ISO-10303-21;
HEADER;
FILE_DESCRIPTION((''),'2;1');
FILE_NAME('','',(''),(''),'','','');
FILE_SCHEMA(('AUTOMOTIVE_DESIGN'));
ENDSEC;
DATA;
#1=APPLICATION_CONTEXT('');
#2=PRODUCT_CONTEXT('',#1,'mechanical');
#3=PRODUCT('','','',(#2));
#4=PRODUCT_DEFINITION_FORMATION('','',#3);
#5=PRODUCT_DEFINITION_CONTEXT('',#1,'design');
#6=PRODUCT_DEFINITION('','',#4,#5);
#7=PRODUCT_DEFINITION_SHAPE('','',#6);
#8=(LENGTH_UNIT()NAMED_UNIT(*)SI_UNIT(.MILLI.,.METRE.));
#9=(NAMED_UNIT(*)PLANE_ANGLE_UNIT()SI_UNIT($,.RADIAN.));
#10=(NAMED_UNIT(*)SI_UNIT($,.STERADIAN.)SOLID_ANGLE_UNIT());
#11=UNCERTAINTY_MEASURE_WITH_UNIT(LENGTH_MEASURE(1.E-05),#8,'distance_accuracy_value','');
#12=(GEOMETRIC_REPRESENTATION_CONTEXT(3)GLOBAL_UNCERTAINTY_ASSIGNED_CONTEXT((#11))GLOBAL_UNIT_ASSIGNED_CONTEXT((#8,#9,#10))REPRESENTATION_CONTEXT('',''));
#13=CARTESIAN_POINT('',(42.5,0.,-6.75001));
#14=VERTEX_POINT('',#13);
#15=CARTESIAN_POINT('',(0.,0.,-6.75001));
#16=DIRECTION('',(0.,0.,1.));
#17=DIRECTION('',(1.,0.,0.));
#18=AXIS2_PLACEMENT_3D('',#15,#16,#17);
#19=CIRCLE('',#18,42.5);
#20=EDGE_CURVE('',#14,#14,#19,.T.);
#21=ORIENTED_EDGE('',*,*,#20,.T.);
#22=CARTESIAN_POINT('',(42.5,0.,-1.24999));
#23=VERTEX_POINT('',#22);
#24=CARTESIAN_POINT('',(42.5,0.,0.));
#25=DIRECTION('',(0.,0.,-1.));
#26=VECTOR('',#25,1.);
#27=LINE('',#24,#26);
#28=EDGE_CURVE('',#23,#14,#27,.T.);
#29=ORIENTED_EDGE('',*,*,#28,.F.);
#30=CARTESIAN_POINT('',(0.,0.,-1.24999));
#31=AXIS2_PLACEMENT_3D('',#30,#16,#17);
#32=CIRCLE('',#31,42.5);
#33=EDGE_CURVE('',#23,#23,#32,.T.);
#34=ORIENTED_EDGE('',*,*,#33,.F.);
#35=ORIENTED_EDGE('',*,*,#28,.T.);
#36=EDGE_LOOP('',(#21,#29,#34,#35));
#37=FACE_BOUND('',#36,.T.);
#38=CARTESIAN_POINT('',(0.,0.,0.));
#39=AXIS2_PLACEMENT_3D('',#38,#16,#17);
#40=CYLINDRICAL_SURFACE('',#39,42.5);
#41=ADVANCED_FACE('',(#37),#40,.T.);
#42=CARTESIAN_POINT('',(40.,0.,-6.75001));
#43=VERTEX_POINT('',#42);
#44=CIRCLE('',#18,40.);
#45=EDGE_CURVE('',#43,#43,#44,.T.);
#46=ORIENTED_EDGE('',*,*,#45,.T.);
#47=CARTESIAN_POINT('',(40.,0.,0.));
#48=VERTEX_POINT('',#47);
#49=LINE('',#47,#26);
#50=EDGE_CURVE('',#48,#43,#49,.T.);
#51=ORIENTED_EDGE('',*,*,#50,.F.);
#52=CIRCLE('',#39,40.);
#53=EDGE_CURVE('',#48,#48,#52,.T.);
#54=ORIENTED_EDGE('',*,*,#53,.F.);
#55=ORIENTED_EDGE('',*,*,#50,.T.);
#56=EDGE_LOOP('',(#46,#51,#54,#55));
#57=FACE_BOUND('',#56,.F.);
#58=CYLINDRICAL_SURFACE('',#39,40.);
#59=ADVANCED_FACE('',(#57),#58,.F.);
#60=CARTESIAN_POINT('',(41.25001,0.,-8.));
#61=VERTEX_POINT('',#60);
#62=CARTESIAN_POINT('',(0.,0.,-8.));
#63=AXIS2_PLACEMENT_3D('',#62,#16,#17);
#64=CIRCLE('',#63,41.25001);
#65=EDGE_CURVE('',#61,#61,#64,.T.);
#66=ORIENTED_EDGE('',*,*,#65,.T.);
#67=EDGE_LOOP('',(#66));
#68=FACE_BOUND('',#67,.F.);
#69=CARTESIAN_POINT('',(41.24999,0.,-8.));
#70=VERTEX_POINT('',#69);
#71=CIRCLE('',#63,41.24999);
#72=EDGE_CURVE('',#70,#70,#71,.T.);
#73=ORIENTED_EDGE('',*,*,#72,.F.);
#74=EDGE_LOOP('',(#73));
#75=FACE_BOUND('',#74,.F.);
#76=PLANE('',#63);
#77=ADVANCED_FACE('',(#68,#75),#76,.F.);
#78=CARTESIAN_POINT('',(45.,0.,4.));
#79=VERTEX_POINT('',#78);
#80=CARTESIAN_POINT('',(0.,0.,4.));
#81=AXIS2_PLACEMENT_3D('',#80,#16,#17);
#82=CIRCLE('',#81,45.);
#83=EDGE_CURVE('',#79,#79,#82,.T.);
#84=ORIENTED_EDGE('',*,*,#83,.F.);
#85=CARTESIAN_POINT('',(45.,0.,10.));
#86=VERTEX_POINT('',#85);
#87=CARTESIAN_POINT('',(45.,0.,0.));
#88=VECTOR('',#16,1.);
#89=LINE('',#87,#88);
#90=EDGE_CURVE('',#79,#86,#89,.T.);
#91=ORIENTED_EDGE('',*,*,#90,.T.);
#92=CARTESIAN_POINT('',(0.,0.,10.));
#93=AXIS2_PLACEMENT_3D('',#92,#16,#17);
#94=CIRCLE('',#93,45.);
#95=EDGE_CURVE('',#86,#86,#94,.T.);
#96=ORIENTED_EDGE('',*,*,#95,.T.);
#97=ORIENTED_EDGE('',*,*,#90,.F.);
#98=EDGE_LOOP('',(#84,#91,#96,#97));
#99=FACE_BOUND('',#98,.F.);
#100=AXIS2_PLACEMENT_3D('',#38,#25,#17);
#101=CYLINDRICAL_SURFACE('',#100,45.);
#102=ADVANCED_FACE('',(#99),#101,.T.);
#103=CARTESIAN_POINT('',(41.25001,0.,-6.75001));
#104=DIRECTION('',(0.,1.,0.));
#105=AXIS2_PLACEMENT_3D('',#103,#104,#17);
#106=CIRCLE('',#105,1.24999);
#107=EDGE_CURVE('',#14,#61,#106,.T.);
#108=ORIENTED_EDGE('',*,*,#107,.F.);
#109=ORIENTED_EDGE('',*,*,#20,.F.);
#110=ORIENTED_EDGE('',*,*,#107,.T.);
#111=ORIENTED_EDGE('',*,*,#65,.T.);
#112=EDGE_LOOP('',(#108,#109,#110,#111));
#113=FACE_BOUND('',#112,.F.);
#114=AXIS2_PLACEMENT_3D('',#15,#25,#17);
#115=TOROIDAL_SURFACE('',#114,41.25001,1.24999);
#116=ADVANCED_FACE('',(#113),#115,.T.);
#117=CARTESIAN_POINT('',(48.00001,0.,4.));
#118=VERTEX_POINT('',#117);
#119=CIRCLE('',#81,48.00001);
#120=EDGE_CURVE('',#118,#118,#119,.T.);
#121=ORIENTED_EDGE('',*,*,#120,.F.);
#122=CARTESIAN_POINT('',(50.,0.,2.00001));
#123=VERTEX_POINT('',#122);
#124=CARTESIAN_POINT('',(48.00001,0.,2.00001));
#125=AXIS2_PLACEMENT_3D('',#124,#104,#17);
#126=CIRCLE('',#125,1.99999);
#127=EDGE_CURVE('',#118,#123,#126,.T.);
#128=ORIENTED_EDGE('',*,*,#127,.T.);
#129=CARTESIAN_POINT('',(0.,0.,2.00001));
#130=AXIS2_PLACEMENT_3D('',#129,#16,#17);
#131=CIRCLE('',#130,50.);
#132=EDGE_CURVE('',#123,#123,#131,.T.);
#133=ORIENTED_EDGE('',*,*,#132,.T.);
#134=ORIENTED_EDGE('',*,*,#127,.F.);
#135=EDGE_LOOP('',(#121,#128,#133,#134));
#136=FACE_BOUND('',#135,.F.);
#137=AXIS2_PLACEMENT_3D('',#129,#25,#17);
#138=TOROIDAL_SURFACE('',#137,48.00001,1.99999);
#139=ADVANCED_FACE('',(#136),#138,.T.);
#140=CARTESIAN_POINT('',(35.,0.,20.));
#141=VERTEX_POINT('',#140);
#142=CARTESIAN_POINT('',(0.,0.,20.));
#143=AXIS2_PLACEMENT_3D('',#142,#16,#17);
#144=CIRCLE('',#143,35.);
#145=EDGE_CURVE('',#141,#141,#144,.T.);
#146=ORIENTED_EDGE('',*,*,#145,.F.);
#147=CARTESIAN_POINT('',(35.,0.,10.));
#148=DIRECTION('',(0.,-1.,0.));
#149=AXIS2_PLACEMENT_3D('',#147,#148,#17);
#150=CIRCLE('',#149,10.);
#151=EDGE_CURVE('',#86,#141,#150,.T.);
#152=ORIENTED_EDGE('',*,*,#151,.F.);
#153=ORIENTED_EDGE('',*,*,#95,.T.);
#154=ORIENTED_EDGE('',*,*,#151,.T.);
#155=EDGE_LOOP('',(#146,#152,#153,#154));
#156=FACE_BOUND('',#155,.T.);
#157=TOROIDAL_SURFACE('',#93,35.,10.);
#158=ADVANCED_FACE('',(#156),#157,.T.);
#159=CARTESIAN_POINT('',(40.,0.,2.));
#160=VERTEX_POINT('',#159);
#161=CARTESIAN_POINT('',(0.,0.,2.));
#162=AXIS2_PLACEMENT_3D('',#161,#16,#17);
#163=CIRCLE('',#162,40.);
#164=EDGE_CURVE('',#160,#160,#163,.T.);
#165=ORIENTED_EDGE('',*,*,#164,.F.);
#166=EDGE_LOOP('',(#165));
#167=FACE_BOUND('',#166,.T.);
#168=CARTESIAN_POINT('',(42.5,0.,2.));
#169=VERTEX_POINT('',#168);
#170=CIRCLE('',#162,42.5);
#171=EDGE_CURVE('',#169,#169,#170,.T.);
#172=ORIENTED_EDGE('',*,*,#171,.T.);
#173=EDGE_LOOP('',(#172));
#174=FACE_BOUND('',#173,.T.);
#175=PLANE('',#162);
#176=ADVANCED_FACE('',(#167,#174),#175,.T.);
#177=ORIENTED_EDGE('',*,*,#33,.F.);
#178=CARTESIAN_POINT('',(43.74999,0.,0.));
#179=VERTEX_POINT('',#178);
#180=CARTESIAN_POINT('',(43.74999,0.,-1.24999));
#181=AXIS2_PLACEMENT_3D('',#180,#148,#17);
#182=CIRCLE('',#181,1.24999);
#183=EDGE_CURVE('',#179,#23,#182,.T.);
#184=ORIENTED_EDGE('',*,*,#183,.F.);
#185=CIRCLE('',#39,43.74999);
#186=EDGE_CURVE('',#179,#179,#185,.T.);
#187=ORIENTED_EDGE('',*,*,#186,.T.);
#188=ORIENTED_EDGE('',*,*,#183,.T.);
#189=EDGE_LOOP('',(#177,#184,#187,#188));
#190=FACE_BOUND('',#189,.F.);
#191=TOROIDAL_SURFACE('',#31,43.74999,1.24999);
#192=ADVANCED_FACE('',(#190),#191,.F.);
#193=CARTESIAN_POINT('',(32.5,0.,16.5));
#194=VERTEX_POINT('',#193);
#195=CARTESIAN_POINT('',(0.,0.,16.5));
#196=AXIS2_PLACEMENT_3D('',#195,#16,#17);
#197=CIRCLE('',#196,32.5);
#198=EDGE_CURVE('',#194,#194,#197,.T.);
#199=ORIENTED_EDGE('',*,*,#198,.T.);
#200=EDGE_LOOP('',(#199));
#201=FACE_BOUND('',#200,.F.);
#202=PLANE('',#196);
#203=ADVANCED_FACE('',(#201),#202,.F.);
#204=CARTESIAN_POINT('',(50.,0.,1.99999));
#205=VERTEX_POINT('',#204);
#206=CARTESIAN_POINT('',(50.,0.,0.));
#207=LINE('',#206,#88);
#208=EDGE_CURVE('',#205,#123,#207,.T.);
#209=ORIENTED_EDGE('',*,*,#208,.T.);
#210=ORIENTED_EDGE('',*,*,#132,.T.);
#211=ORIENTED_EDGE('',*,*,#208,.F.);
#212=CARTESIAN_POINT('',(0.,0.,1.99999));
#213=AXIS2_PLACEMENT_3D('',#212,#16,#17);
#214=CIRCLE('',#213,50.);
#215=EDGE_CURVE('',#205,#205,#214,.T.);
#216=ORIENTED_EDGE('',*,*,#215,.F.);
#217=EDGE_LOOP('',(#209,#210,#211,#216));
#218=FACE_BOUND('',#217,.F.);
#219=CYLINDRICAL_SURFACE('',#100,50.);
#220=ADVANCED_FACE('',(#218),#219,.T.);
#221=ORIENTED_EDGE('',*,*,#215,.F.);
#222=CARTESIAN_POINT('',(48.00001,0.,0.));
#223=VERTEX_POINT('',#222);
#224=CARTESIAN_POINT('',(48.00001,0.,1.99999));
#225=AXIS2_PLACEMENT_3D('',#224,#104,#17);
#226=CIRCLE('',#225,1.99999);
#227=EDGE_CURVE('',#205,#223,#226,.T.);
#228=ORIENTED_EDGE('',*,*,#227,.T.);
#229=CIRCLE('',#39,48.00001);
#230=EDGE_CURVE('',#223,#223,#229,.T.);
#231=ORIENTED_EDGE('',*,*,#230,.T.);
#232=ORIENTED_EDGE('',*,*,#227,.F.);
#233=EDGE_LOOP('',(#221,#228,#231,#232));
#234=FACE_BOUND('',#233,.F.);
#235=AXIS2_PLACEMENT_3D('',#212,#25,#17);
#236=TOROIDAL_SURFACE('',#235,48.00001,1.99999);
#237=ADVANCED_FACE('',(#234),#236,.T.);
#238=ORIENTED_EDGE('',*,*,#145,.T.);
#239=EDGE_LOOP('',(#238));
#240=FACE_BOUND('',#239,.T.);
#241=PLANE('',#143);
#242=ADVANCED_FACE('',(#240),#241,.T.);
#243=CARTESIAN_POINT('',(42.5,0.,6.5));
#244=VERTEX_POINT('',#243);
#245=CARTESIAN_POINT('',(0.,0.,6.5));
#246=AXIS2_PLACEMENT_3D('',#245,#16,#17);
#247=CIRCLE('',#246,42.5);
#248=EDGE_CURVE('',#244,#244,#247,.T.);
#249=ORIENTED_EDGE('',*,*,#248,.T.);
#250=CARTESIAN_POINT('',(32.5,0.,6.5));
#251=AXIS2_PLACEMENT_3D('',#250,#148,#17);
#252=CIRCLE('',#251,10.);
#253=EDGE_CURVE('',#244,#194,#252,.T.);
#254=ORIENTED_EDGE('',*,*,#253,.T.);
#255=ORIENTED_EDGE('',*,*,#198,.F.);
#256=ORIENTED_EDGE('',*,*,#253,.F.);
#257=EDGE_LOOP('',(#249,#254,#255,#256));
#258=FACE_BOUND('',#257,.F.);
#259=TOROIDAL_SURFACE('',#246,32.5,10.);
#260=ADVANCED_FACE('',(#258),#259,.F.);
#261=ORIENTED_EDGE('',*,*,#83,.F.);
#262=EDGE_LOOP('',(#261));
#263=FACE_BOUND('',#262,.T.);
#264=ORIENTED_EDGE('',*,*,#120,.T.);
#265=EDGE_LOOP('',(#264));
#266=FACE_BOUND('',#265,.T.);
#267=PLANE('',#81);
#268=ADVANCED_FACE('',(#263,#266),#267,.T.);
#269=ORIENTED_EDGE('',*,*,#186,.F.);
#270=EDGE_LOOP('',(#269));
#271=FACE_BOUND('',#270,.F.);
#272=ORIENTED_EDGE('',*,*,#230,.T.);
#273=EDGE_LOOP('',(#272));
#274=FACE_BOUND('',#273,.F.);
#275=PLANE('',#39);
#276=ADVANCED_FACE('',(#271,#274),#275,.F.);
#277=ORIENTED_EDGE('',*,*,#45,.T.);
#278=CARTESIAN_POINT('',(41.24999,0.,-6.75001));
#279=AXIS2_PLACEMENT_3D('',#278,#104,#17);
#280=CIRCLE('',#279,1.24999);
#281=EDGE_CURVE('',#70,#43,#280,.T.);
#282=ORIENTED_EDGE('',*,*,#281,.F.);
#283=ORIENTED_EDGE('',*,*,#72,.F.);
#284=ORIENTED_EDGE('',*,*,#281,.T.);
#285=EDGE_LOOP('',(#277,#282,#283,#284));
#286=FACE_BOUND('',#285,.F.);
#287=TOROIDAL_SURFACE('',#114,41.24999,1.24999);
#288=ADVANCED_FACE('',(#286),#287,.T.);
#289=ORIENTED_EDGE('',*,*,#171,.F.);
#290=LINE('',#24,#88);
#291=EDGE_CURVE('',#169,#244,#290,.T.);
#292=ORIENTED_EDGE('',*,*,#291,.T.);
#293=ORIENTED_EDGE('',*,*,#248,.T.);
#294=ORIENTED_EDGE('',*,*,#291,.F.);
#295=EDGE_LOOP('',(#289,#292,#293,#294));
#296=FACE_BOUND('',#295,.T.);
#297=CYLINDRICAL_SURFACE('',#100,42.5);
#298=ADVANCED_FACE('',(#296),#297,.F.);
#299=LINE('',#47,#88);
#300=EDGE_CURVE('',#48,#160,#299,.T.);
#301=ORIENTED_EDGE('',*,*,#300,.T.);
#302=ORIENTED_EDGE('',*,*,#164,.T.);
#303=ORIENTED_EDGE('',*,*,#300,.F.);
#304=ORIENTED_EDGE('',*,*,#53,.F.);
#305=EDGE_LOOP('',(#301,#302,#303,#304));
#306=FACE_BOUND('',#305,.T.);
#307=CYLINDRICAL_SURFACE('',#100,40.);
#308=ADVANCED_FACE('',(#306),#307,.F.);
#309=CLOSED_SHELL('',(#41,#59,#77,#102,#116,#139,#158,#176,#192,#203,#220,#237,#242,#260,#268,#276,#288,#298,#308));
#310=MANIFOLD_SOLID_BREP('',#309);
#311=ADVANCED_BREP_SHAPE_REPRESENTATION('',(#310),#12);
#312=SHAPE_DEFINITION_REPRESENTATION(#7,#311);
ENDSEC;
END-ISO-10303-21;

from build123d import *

# Parameters (mm, degrees)
F0_R          = 45
F0_R_2        = 42.5
F1_DEPTH      = 20
F0_R_3        = 50
F2_DEPTH      = 4
F3_R          = 42.5
F4_DEPTH      = 3.5
F0_R_4        = 40
F5_DEPTH      = 2
F5_DEPTH_BACK = 8
F6_R          = 10
F7_R          = 1.99999
F8_R          = 1.24999


# Not quite as in the source:
# - a fillet or chamfer is up to 0.001 mm smaller than in the source, because OpenCascade refuses the exact size


with BuildPart() as f1:
    # F0 (on Top) → F1 (new body)
    with BuildSketch(Plane.XY):
        Circle(F0_R)
        Circle(F0_R_2, mode=Mode.SUBTRACT)
    extrude(amount=F1_DEPTH)

    # F0 (on Top) → F2 (join)
    with BuildSketch(Plane.XY):
        Circle(F0_R_3)
        Circle(F0_R, mode=Mode.SUBTRACT)
    extrude(amount=F2_DEPTH)

    # F3 (on face) → F4 (join)
    with BuildSketch(Plane.XY.offset(20)):
        Circle(F3_R)
    extrude(amount=-F4_DEPTH)

    # F0 (on Top) → F5 (join, two sides)
    with BuildSketch(Plane.XY) as f5_sk:
        Circle(F0_R_2)
        Circle(F0_R_4, mode=Mode.SUBTRACT)
    extrude(amount=F5_DEPTH)
    extrude(f5_sk.sketch, amount=-F5_DEPTH_BACK)

    # F6
    f6_edges = [f1.edges().sort_by_distance(p)[0] for p in [
        (-42.5, 0, 16.5),
        (-45, 0, 20),
    ]]
    fillet(f6_edges, radius=F6_R)

    # F7 (radius 2 in the source; OpenCascade refuses exactly that, so slightly less here)
    f7_edges = [f1.edges().sort_by_distance(p)[0] for p in [
        (50, 0, 2),
        (-50, 0, 0),
        (-50, 0, 4),
    ]]
    fillet(f7_edges, radius=F7_R)

    # F8 (radius 1.25 in the source; OpenCascade refuses exactly that, so slightly less here)
    f8_edges = [f1.edges().sort_by_distance(p)[0] for p in [
        (-42.5, 0, -8),
        (-40, 0, -8),
        (42.5, 0, -4),
        (-42.5, 0, 0),
    ]]
    fillet(f8_edges, radius=F8_R)


solid = f1.part
